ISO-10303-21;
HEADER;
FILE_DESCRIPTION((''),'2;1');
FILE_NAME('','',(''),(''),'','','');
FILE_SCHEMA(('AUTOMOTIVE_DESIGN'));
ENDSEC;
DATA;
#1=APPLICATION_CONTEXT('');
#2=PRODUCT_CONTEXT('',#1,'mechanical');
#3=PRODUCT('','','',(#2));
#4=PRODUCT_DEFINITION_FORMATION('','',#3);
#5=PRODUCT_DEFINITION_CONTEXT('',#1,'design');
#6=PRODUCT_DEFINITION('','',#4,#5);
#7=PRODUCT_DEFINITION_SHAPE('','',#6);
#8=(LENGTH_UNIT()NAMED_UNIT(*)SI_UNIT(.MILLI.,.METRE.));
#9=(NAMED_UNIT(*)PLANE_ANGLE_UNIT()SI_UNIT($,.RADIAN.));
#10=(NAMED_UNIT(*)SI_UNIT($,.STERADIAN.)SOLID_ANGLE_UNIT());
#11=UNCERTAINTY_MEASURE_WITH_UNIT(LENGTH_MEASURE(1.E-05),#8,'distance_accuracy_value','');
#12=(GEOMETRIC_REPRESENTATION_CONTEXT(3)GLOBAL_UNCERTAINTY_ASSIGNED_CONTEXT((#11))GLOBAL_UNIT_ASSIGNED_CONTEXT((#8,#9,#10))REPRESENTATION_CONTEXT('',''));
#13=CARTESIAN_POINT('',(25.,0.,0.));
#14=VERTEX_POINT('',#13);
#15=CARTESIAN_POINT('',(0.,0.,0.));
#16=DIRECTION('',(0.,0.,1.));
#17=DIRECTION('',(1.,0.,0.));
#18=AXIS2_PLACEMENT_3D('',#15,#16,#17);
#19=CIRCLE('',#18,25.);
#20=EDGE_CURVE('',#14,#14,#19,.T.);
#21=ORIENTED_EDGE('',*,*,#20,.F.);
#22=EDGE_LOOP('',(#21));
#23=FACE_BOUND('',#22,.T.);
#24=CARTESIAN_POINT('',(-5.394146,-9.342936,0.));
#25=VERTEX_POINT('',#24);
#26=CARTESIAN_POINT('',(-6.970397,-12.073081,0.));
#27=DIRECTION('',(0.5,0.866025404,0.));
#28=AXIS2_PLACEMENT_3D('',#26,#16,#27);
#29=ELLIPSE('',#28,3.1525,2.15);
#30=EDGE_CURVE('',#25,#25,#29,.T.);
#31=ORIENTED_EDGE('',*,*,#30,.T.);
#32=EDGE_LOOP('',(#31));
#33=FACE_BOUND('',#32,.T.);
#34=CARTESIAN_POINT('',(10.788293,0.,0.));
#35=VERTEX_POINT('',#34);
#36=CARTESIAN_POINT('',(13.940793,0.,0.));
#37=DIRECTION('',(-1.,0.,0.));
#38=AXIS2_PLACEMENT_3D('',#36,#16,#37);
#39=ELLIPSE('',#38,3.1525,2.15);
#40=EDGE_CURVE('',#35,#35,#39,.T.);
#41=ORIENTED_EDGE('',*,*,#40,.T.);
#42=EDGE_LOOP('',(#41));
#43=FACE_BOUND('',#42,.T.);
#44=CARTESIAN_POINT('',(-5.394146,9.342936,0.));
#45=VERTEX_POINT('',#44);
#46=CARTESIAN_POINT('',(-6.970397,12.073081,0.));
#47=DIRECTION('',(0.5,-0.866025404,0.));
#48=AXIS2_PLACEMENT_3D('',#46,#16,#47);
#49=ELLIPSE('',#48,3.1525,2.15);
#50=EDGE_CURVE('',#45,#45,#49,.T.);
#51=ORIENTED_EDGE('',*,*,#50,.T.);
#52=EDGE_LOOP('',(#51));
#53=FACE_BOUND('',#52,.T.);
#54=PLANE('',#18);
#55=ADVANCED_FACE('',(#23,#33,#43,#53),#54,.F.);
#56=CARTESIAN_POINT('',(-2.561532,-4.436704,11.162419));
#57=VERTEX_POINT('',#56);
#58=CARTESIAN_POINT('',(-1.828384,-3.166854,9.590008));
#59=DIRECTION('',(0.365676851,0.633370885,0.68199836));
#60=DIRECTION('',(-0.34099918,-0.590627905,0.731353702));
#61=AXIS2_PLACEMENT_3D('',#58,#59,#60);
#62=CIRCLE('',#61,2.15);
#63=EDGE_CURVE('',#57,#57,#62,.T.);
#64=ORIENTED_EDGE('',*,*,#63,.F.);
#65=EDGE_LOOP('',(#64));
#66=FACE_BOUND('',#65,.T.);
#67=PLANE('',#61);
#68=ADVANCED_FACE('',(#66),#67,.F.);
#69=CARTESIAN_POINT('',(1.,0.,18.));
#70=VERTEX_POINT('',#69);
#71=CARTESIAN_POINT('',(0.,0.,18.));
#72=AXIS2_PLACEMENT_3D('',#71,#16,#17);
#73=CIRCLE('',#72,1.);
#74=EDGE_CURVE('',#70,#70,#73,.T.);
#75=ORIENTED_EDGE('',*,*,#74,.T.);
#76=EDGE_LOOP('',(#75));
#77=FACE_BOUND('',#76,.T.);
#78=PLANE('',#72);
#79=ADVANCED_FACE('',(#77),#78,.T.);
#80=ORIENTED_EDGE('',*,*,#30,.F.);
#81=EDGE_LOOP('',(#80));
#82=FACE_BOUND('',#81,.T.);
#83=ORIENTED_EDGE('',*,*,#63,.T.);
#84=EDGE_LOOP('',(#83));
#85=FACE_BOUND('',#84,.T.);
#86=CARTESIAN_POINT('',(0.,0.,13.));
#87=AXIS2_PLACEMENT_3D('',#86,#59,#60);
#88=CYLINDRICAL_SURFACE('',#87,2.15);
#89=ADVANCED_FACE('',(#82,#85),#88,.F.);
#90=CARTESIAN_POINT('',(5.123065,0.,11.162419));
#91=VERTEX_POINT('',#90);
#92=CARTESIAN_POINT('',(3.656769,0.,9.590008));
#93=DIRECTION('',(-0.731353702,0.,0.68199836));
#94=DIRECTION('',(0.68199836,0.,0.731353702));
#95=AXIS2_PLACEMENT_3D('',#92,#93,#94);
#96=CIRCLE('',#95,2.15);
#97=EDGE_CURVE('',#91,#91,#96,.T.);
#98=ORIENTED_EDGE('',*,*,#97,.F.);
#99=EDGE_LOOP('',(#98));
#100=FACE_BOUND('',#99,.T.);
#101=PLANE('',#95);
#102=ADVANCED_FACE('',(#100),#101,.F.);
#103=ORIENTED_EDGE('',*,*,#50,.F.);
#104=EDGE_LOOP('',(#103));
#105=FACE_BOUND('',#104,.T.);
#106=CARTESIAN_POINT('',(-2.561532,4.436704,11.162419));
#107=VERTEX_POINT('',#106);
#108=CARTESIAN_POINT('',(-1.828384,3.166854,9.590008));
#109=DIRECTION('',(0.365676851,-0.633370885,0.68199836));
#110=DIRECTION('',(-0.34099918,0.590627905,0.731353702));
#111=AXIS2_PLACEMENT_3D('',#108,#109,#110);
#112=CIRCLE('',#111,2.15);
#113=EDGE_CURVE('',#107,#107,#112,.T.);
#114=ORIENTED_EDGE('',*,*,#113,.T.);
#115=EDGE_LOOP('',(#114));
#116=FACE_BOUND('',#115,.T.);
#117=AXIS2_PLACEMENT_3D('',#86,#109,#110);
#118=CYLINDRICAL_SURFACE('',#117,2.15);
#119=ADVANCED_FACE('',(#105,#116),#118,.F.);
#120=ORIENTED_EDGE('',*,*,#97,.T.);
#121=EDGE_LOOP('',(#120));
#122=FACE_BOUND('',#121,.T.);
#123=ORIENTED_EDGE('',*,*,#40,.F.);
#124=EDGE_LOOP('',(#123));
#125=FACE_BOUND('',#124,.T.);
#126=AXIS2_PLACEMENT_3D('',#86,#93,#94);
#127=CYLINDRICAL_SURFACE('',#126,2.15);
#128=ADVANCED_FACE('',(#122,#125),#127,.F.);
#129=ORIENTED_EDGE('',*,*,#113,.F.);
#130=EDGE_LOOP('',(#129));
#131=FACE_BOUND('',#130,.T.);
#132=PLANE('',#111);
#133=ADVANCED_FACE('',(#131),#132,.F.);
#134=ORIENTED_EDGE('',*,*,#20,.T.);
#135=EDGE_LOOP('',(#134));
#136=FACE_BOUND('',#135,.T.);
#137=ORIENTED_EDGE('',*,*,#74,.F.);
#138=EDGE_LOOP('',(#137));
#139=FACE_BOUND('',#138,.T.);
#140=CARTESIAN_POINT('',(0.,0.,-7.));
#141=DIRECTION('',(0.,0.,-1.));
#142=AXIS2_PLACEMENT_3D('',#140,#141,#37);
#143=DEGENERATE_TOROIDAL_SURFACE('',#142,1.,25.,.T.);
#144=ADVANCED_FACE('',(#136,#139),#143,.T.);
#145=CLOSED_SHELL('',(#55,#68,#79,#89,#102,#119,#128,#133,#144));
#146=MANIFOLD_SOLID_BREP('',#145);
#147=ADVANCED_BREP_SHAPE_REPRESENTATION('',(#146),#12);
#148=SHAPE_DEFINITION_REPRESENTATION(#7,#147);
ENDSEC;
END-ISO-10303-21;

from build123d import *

# Parameters (mm, degrees)
ESQUISSE1_R                  = 25
BOSS_EXTRU_1_DEPTH           = 18
CONG_1_R                     = 25
R_P_TITION_CIRCULAIRE1_COUNT = 3


with BuildPart() as part:
    # Esquisse1 → Boss.-Extru.1 (new body)
    with BuildSketch(Plane.XY):
        Circle(ESQUISSE1_R)
    extrude(amount=BOSS_EXTRU_1_DEPTH)

    # Congé1
    # the kernel refuses this fillet: 25 mm, written as the material it takes off along each edge
    with BuildSketch(Plane(origin=(0, 0, 18), x_dir=(1, 0, 0), z_dir=(0, -1, 0))) as cong_1_piece_1:
        with BuildLine():
            CenterArc((1, -25), CONG_1_R, 16.260204708, 73.739795292)
            Line((1, 0), (1, 0.5))
            Line((1, 0.5), (25, 0.5))
            Line((25, 0.5), (25.5, 0))
            ThreePointArc((25.5, 0), (25.5, -9), (25.48, -17.86))
            Line((25.48, -17.86), (25, -18))
        make_face()
    revolve(axis=Axis((0, 0, 18), (0, 0, 1)), mode=Mode.SUBTRACT)

    # Esquisse3 → Enlèvement de matière-Révolution1 (revolve, cut)
    with BuildSketch(Plane(origin=(0, 0, 0), x_dir=(1, 0, 0), z_dir=(0, 1, 0))):
        Polygon((16.821135137, 2.685962281), (3.656768508, -9.5900082), (5.123064982, -11.162418658), (18.287431611, 1.113551823), align=None)
    enl_vement_de_mati_re_r_volution1 = revolve(axis=Axis((0, 0, 13), (0.7313537016191742, 0, -0.6819983600624946)), mode=Mode.SUBTRACT)

    # Répétition circulaire1: Enlèvement de matière-Révolution1 ×3 about axis
    r_p_tition_circulaire1_axis = Axis((0, 0, 0), (0, 0, 1))
    for i in range(1, R_P_TITION_CIRCULAIRE1_COUNT):
        add(enl_vement_de_mati_re_r_volution1.rotate(r_p_tition_circulaire1_axis, i * 360 / R_P_TITION_CIRCULAIRE1_COUNT), mode=Mode.SUBTRACT)


solid = part.part
